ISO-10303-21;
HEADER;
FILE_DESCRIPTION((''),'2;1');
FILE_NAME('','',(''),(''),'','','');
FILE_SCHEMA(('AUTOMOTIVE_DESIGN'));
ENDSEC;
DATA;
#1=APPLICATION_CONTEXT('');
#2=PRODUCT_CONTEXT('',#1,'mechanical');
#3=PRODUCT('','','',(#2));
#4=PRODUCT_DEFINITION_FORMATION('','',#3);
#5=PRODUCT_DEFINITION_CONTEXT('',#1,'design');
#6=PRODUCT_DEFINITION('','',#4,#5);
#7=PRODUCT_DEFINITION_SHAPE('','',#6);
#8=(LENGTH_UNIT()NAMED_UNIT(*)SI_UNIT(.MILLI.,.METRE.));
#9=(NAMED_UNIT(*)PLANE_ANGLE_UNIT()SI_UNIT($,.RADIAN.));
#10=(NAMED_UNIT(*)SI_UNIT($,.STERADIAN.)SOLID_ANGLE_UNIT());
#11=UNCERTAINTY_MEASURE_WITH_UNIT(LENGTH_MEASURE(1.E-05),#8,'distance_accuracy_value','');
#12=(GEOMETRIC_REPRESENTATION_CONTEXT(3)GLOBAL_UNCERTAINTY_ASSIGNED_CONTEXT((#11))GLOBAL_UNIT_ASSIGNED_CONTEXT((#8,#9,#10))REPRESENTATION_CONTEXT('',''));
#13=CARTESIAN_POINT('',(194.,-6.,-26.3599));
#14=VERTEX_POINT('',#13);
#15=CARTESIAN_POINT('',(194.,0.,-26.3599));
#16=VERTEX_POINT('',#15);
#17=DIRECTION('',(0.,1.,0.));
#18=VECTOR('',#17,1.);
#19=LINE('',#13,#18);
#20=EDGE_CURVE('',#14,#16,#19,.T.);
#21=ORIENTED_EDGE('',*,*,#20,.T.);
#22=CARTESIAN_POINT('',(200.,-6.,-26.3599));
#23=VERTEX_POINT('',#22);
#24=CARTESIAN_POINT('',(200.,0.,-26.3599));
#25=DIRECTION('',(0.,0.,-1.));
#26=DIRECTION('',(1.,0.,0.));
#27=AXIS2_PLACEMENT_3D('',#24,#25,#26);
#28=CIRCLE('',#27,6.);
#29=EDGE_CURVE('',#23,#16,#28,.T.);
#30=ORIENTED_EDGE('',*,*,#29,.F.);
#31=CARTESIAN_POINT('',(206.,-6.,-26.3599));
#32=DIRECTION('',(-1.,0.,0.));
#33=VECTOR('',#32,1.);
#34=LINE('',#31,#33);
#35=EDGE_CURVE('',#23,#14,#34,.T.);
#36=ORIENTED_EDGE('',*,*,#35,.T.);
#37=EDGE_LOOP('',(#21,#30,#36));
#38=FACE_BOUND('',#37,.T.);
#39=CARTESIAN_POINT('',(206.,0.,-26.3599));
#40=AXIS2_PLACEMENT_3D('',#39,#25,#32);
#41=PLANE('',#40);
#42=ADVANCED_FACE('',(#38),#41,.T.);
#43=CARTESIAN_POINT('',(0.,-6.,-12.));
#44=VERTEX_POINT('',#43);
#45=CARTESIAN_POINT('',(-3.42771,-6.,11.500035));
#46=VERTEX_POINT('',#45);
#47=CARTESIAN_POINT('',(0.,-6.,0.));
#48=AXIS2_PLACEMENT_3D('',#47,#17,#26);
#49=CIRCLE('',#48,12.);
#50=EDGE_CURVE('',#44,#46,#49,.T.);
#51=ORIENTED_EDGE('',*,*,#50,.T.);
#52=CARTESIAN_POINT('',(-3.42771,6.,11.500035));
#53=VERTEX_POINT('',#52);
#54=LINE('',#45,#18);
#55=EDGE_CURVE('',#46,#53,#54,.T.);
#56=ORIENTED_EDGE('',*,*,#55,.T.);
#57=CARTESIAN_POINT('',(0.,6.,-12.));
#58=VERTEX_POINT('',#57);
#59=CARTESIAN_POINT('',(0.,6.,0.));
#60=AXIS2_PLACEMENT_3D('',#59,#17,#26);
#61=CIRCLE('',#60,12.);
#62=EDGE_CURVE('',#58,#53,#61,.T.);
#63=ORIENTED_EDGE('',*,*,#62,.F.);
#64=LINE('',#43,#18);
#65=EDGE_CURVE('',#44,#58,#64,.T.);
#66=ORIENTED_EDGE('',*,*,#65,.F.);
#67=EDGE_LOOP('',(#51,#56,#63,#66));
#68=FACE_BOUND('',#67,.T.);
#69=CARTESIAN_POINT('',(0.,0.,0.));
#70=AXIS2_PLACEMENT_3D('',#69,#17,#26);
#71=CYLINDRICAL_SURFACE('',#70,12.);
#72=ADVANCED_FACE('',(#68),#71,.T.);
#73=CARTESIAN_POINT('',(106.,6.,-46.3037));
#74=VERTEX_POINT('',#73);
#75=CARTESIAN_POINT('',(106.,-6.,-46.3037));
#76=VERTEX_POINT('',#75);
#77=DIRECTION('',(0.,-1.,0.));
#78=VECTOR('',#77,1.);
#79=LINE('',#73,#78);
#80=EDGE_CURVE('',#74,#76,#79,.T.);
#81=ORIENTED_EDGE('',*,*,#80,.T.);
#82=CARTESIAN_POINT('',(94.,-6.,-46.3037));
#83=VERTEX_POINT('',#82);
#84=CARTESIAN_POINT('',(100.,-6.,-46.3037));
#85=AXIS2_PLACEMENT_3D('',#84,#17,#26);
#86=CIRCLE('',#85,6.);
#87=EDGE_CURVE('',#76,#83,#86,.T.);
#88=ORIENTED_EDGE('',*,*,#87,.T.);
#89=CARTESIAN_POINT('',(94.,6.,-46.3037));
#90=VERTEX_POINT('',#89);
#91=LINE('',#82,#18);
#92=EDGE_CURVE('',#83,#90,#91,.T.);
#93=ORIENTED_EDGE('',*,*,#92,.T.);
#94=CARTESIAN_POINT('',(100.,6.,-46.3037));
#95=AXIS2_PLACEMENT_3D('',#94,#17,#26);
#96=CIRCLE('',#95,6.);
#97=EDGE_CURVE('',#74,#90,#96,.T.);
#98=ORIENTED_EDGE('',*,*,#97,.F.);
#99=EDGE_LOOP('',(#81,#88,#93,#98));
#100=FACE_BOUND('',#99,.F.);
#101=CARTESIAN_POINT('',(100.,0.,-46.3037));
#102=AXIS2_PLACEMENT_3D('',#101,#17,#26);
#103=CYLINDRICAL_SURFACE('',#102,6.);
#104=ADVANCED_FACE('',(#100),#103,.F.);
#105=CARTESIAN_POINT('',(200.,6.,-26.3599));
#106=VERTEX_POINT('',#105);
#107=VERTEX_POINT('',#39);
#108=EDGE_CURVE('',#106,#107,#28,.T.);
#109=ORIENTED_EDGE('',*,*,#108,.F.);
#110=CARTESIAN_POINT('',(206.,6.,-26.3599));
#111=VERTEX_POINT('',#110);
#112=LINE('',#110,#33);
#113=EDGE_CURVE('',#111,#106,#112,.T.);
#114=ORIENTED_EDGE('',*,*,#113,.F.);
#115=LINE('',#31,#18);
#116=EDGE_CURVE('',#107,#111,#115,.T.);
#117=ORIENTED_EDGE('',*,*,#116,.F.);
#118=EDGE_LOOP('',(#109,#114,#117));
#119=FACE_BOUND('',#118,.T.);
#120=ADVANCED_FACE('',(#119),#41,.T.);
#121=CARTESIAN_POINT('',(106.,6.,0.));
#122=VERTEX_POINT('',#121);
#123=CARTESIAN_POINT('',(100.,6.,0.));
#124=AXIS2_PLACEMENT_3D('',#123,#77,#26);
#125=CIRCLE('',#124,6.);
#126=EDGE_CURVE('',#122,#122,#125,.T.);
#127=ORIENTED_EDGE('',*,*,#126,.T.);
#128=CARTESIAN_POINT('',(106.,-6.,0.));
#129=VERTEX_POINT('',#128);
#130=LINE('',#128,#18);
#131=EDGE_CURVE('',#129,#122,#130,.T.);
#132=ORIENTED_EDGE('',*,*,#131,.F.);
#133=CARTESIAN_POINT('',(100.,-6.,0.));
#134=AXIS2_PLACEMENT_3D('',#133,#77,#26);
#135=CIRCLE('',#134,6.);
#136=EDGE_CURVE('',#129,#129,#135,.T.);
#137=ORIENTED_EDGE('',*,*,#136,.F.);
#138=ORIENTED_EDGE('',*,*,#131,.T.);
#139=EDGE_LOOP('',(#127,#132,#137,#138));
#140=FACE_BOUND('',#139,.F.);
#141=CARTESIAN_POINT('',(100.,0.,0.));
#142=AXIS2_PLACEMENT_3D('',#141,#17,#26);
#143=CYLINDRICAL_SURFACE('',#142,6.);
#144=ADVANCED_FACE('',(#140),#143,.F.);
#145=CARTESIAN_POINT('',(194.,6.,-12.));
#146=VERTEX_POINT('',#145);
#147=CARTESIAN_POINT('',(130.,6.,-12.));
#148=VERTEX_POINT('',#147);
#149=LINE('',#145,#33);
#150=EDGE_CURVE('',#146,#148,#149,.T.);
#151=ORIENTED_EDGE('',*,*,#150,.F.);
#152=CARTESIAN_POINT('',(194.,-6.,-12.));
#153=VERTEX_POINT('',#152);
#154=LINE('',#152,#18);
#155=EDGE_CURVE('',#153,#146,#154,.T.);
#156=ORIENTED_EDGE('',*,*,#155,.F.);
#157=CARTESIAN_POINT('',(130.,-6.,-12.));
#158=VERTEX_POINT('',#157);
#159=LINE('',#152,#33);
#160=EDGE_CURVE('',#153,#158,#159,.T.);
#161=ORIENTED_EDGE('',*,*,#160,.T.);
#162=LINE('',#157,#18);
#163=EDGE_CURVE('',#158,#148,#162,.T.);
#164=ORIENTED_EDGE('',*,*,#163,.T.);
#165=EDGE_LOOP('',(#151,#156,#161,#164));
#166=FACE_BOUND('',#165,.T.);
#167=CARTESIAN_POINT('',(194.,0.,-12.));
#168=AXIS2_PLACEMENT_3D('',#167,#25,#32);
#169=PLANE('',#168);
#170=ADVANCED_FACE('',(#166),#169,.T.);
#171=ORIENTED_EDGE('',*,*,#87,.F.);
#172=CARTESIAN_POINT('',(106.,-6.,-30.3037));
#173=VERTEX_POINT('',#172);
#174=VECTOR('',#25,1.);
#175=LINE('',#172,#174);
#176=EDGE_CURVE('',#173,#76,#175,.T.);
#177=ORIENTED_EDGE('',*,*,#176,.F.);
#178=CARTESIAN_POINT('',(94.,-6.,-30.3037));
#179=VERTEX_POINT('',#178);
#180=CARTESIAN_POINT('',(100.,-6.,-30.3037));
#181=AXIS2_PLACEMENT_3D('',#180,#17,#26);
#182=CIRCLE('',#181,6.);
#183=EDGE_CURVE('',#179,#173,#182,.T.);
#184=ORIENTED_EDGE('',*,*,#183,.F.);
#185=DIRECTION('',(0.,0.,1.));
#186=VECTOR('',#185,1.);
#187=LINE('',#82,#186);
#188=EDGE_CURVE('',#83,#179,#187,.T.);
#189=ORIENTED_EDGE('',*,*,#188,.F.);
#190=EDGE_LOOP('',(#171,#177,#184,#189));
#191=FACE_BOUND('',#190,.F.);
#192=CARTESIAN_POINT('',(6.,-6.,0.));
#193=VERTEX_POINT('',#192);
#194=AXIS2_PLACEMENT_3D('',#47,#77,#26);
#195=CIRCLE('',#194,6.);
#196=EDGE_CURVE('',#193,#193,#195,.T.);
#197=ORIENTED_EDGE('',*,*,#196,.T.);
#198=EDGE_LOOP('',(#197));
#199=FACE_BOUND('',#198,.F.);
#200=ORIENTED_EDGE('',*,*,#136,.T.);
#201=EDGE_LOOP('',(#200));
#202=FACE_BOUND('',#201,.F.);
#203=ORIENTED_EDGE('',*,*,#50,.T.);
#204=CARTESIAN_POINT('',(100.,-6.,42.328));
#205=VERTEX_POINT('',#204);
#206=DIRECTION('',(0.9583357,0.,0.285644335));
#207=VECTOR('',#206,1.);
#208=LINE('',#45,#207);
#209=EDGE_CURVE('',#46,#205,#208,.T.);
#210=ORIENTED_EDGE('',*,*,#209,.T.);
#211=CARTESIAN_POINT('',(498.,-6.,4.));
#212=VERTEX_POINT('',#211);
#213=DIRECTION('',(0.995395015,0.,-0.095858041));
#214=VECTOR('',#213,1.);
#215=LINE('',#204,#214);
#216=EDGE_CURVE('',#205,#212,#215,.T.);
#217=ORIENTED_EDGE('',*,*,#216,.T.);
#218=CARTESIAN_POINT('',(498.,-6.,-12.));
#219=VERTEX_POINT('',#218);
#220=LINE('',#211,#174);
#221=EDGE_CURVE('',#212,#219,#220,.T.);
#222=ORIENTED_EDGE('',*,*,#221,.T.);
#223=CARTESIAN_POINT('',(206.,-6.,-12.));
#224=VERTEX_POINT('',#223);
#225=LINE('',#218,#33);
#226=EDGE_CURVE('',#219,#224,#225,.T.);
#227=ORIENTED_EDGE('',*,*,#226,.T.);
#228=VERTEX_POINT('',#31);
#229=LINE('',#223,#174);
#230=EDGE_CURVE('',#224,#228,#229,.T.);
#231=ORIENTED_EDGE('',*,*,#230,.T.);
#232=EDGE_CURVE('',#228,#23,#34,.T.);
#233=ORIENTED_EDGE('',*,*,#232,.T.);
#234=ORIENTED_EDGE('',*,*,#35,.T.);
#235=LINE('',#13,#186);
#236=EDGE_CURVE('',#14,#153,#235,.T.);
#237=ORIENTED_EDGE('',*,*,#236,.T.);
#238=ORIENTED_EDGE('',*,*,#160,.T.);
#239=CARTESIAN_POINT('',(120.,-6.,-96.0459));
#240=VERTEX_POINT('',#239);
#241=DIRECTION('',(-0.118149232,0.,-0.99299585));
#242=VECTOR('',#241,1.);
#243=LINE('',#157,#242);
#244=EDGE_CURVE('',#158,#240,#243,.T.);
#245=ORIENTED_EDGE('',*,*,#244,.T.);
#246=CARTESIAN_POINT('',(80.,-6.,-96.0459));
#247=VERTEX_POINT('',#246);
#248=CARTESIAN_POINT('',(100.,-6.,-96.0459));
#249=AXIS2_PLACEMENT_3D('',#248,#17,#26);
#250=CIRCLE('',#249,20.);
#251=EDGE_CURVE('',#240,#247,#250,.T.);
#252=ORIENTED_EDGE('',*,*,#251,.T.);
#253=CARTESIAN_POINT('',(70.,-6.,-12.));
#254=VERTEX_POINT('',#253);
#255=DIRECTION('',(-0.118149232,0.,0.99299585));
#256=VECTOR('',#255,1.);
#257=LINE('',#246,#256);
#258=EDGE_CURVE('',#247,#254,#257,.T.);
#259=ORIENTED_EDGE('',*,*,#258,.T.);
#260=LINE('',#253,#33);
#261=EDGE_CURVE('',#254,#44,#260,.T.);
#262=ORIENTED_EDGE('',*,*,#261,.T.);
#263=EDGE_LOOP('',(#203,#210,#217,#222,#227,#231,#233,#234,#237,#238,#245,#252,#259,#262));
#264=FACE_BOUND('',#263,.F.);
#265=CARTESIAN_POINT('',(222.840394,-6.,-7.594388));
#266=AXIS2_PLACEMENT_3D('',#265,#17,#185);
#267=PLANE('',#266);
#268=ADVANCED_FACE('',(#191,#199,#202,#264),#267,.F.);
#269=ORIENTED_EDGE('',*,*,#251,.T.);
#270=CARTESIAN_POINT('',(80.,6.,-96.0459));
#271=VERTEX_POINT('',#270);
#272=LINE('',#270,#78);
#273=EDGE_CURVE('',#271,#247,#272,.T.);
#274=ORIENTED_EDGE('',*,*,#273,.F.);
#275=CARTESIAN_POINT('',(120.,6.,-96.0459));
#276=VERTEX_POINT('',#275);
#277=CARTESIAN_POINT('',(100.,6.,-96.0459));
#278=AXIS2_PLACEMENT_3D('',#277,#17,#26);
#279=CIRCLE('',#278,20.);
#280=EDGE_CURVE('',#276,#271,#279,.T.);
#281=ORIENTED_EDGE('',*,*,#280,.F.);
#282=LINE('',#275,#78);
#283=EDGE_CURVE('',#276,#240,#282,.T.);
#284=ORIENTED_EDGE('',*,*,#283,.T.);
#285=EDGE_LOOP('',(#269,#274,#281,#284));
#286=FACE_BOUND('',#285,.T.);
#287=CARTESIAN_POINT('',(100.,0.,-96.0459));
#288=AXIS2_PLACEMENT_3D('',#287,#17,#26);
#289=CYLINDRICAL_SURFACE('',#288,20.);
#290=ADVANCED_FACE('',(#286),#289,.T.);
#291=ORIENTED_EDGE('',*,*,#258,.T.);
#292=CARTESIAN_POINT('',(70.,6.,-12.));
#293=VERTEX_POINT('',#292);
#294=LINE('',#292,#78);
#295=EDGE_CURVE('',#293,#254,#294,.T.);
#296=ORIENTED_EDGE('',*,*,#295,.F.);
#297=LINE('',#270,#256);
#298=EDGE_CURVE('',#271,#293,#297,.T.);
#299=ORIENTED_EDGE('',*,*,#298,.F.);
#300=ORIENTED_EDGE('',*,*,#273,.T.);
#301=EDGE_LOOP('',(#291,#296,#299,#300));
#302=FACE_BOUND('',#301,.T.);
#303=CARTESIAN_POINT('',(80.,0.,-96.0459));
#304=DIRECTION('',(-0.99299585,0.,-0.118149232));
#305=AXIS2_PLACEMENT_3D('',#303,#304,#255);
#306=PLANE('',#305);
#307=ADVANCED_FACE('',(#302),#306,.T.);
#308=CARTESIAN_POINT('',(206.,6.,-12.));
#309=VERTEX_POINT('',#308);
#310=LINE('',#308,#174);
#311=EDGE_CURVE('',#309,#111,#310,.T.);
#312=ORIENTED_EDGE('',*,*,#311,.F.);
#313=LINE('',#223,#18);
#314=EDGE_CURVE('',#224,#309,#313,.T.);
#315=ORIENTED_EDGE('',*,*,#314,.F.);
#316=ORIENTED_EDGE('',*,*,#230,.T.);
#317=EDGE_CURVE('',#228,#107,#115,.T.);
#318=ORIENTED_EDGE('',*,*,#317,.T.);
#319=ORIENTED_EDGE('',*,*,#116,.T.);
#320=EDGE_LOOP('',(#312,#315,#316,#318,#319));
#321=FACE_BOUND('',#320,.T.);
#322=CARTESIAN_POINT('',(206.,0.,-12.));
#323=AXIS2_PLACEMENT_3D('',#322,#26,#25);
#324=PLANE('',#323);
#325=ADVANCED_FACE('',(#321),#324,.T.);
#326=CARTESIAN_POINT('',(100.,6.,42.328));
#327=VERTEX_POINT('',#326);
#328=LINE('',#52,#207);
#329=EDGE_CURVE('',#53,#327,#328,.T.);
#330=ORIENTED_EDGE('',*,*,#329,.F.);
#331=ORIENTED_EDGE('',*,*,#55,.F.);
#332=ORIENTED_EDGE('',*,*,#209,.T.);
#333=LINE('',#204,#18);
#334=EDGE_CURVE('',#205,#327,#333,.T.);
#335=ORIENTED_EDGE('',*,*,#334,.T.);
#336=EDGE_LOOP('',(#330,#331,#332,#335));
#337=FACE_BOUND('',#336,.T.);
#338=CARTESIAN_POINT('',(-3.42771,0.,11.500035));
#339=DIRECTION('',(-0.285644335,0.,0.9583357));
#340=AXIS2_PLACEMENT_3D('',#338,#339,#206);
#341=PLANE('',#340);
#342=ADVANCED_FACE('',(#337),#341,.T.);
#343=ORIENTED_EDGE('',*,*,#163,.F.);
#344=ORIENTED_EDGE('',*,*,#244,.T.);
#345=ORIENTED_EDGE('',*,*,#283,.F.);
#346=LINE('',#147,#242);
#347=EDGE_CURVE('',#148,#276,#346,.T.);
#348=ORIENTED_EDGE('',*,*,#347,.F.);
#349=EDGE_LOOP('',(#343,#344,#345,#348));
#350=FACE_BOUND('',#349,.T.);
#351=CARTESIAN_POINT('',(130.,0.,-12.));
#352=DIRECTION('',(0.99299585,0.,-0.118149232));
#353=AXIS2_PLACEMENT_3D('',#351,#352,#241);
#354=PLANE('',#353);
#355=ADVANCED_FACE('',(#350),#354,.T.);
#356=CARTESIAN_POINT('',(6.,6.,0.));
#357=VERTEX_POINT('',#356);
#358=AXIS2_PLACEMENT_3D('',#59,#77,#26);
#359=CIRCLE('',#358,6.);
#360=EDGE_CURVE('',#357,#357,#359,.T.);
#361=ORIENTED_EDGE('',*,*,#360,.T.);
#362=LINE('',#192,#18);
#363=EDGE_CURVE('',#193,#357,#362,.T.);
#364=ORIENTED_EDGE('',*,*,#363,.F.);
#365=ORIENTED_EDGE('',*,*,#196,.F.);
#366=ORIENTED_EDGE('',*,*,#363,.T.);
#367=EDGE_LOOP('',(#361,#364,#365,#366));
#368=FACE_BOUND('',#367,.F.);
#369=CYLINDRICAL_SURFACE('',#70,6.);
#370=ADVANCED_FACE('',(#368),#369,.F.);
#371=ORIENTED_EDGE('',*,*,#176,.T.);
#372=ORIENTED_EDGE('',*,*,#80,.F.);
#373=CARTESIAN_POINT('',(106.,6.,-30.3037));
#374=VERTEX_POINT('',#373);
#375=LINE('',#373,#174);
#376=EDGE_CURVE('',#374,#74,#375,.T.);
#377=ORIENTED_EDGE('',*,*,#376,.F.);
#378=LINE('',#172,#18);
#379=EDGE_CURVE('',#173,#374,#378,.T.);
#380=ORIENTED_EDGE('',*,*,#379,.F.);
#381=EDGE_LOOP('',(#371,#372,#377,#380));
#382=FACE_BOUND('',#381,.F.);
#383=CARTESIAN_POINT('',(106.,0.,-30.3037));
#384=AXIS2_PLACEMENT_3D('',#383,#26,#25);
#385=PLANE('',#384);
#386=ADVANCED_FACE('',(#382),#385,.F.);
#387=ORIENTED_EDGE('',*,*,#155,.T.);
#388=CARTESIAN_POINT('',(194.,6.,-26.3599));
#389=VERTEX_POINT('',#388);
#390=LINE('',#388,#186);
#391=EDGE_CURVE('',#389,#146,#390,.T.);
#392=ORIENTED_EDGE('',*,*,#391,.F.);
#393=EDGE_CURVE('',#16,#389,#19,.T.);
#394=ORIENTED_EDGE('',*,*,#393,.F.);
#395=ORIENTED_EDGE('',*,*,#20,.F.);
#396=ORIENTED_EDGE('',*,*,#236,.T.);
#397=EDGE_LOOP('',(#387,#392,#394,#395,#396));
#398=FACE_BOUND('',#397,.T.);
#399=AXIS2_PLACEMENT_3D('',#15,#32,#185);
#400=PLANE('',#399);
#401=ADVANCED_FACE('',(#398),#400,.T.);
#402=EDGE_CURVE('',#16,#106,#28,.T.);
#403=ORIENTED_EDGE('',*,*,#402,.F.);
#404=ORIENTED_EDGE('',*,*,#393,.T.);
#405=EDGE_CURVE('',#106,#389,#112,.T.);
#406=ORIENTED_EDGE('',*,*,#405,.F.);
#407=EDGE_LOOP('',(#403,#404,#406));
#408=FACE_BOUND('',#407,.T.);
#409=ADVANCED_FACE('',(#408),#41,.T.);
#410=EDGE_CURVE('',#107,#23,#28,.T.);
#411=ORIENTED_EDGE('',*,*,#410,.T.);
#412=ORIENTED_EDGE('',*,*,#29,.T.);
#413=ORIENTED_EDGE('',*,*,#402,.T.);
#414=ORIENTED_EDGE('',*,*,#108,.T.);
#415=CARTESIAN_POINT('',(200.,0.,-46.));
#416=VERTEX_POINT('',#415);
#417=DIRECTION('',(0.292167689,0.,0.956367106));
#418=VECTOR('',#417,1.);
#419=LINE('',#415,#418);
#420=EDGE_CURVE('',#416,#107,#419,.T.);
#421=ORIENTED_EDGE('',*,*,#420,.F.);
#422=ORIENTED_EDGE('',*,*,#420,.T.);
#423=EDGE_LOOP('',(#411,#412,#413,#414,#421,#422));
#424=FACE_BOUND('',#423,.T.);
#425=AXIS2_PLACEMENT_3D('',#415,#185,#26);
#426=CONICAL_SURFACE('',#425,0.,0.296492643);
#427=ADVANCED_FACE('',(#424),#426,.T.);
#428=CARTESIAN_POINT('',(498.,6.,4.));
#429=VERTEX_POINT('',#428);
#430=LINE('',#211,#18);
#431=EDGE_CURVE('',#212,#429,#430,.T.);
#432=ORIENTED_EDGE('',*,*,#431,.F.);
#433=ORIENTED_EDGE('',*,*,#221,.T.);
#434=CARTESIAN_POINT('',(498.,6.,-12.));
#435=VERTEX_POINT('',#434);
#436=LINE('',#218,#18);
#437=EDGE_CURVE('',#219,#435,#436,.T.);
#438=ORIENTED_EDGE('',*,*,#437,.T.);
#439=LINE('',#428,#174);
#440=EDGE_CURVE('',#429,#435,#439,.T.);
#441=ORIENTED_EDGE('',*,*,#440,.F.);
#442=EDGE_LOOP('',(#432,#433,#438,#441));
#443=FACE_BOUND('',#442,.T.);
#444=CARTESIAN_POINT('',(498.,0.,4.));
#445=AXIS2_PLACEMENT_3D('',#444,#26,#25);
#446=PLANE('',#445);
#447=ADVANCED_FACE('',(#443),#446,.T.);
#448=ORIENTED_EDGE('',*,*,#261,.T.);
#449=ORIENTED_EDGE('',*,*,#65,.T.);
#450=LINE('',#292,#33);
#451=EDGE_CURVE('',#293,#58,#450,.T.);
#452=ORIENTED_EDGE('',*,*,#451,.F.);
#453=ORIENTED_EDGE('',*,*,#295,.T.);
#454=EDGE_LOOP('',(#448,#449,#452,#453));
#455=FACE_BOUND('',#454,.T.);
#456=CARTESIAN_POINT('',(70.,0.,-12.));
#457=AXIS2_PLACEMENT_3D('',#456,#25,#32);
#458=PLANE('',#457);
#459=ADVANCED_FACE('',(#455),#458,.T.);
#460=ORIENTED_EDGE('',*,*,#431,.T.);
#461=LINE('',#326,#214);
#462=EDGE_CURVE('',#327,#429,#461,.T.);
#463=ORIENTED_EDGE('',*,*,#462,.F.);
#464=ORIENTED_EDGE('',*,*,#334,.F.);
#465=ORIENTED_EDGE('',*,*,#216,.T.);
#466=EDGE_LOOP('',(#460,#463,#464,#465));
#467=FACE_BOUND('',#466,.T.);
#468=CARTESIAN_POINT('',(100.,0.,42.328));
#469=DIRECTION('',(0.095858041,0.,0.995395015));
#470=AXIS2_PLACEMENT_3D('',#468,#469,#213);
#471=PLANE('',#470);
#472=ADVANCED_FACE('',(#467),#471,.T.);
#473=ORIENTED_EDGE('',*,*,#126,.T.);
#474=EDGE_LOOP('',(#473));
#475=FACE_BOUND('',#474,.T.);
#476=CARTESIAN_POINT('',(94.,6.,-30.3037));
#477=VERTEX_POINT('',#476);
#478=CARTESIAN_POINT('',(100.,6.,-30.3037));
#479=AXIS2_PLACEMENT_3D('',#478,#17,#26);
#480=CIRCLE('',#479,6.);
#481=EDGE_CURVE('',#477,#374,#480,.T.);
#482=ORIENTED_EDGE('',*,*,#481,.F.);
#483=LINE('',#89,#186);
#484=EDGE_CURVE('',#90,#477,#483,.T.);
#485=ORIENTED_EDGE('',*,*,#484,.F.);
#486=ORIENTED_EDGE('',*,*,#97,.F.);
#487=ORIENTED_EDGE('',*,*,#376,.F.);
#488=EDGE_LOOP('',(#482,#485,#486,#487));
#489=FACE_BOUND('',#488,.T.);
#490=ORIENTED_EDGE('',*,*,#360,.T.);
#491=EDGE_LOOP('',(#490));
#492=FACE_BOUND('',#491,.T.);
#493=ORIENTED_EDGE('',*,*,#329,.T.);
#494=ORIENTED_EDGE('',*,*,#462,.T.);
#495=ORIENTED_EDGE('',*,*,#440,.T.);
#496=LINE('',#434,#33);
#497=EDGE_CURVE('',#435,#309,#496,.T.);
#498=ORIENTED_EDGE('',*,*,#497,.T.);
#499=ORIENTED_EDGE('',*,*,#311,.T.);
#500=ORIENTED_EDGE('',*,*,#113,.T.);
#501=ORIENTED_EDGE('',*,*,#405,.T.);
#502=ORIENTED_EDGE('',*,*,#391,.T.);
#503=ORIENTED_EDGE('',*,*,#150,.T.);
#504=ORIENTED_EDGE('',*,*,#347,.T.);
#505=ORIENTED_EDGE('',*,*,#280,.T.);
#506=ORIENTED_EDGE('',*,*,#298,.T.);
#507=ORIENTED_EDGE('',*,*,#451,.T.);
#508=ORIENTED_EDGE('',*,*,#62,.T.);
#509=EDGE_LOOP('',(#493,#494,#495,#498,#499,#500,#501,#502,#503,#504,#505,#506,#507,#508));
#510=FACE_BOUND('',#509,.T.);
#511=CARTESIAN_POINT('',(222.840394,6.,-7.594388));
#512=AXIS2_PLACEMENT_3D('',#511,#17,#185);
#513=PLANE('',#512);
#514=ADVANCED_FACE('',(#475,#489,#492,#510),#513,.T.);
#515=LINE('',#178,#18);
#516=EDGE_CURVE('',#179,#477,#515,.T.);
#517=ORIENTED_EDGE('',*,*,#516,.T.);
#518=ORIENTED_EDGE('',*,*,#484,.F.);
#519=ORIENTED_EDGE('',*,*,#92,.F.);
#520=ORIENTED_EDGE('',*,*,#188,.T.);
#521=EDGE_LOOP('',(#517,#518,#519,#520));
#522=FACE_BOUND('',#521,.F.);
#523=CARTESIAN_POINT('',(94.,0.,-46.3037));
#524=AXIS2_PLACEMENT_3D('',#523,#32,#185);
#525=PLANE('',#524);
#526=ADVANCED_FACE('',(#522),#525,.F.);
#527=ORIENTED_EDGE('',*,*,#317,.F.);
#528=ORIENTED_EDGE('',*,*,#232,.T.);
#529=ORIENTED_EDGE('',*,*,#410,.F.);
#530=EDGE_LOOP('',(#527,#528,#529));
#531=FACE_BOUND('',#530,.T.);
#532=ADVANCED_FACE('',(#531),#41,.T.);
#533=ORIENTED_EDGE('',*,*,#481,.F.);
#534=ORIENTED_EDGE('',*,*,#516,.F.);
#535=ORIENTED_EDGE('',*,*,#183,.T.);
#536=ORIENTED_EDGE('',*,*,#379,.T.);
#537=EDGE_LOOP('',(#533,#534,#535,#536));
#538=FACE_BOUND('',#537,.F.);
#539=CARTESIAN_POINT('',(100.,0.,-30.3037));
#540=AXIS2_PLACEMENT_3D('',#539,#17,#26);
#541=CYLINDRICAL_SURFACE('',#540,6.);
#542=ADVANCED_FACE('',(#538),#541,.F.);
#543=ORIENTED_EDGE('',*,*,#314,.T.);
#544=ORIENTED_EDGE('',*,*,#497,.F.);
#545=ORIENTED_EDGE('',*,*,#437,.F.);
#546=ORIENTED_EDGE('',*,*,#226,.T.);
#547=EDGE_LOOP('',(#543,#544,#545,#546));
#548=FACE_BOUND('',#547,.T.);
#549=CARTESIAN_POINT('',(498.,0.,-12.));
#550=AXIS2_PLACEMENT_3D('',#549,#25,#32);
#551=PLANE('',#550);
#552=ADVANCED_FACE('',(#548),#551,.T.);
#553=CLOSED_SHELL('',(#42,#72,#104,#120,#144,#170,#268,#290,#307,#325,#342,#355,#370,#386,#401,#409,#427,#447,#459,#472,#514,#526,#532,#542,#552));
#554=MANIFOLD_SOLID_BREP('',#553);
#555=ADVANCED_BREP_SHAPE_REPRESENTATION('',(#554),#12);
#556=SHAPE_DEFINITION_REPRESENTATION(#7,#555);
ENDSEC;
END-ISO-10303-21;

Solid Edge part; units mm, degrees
sketch "Sketch1" plane through (0, 0, 0) normal (0, -1, 0) x (1, 0, 0)
  line L0 (70, -12) -> (0, -12)
  arc A0 (0, -12) -> (-3.4277, 11.5) centre (0, 0) cw
  line L1 (-3.4277, 11.5) -> (100, 42.328)
  line L2 (100, 42.328) -> (498, 4)
  line L3 (498, 4) -> (498, -12)
  line L4 (498, -12) -> (206, -12)
  line L5 (206, -12) -> (206, -26.3599)
  line L6 (206, -26.3599) -> (194, -26.3599)
  line L7 (194, -26.3599) -> (194, -12)
  line L8 (194, -12) -> (130, -12)
  line L9 (130, -12) -> (120, -96.0459)
  arc A1 (120, -96.0459) -> (80, -96.0459) centre (100, -96.0459) cw
  line L10 (80, -96.0459) -> (70, -12)
  circle A2 centre (0, 0) radius 6
  circle A3 centre (100, 0) radius 6
  line L11 (94, -46.3037) -> (94, -30.3037)
  arc A4 (106, -46.3037) -> (94, -46.3037) centre (100, -46.3037) cw
  line L12 (106, -30.3037) -> (106, -46.3037)
  arc A5 (94, -30.3037) -> (106, -30.3037) centre (100, -30.3037) cw
  dimension "D1" = 24
  dimension "D2" = 12
  dimension "D3" = 100
  dimension "D4" = 12
  dimension "D5" = 12
  dimension "D6" = 510
  dimension "D7" = 16
extrude "Protrusion1" add sketch "Sketch1" along normal mid plane 12
sketch "Sketch2" plane through (0, 0, 0) normal (0, -1, 0) x (1, 0, 0)
  line L0 (200, -46) -> (206, -26.3599)
  line L1 (206, -26.3599) -> (200, -26.3599)
  dimension "D1" = 46
revolve "RevolvedProtrusion1" add sketch "Sketch2" angle 360 about axis through (200, 0, -26.3599) along (0, 0, -1)
properties part number "11" material "Fe 410 W"
